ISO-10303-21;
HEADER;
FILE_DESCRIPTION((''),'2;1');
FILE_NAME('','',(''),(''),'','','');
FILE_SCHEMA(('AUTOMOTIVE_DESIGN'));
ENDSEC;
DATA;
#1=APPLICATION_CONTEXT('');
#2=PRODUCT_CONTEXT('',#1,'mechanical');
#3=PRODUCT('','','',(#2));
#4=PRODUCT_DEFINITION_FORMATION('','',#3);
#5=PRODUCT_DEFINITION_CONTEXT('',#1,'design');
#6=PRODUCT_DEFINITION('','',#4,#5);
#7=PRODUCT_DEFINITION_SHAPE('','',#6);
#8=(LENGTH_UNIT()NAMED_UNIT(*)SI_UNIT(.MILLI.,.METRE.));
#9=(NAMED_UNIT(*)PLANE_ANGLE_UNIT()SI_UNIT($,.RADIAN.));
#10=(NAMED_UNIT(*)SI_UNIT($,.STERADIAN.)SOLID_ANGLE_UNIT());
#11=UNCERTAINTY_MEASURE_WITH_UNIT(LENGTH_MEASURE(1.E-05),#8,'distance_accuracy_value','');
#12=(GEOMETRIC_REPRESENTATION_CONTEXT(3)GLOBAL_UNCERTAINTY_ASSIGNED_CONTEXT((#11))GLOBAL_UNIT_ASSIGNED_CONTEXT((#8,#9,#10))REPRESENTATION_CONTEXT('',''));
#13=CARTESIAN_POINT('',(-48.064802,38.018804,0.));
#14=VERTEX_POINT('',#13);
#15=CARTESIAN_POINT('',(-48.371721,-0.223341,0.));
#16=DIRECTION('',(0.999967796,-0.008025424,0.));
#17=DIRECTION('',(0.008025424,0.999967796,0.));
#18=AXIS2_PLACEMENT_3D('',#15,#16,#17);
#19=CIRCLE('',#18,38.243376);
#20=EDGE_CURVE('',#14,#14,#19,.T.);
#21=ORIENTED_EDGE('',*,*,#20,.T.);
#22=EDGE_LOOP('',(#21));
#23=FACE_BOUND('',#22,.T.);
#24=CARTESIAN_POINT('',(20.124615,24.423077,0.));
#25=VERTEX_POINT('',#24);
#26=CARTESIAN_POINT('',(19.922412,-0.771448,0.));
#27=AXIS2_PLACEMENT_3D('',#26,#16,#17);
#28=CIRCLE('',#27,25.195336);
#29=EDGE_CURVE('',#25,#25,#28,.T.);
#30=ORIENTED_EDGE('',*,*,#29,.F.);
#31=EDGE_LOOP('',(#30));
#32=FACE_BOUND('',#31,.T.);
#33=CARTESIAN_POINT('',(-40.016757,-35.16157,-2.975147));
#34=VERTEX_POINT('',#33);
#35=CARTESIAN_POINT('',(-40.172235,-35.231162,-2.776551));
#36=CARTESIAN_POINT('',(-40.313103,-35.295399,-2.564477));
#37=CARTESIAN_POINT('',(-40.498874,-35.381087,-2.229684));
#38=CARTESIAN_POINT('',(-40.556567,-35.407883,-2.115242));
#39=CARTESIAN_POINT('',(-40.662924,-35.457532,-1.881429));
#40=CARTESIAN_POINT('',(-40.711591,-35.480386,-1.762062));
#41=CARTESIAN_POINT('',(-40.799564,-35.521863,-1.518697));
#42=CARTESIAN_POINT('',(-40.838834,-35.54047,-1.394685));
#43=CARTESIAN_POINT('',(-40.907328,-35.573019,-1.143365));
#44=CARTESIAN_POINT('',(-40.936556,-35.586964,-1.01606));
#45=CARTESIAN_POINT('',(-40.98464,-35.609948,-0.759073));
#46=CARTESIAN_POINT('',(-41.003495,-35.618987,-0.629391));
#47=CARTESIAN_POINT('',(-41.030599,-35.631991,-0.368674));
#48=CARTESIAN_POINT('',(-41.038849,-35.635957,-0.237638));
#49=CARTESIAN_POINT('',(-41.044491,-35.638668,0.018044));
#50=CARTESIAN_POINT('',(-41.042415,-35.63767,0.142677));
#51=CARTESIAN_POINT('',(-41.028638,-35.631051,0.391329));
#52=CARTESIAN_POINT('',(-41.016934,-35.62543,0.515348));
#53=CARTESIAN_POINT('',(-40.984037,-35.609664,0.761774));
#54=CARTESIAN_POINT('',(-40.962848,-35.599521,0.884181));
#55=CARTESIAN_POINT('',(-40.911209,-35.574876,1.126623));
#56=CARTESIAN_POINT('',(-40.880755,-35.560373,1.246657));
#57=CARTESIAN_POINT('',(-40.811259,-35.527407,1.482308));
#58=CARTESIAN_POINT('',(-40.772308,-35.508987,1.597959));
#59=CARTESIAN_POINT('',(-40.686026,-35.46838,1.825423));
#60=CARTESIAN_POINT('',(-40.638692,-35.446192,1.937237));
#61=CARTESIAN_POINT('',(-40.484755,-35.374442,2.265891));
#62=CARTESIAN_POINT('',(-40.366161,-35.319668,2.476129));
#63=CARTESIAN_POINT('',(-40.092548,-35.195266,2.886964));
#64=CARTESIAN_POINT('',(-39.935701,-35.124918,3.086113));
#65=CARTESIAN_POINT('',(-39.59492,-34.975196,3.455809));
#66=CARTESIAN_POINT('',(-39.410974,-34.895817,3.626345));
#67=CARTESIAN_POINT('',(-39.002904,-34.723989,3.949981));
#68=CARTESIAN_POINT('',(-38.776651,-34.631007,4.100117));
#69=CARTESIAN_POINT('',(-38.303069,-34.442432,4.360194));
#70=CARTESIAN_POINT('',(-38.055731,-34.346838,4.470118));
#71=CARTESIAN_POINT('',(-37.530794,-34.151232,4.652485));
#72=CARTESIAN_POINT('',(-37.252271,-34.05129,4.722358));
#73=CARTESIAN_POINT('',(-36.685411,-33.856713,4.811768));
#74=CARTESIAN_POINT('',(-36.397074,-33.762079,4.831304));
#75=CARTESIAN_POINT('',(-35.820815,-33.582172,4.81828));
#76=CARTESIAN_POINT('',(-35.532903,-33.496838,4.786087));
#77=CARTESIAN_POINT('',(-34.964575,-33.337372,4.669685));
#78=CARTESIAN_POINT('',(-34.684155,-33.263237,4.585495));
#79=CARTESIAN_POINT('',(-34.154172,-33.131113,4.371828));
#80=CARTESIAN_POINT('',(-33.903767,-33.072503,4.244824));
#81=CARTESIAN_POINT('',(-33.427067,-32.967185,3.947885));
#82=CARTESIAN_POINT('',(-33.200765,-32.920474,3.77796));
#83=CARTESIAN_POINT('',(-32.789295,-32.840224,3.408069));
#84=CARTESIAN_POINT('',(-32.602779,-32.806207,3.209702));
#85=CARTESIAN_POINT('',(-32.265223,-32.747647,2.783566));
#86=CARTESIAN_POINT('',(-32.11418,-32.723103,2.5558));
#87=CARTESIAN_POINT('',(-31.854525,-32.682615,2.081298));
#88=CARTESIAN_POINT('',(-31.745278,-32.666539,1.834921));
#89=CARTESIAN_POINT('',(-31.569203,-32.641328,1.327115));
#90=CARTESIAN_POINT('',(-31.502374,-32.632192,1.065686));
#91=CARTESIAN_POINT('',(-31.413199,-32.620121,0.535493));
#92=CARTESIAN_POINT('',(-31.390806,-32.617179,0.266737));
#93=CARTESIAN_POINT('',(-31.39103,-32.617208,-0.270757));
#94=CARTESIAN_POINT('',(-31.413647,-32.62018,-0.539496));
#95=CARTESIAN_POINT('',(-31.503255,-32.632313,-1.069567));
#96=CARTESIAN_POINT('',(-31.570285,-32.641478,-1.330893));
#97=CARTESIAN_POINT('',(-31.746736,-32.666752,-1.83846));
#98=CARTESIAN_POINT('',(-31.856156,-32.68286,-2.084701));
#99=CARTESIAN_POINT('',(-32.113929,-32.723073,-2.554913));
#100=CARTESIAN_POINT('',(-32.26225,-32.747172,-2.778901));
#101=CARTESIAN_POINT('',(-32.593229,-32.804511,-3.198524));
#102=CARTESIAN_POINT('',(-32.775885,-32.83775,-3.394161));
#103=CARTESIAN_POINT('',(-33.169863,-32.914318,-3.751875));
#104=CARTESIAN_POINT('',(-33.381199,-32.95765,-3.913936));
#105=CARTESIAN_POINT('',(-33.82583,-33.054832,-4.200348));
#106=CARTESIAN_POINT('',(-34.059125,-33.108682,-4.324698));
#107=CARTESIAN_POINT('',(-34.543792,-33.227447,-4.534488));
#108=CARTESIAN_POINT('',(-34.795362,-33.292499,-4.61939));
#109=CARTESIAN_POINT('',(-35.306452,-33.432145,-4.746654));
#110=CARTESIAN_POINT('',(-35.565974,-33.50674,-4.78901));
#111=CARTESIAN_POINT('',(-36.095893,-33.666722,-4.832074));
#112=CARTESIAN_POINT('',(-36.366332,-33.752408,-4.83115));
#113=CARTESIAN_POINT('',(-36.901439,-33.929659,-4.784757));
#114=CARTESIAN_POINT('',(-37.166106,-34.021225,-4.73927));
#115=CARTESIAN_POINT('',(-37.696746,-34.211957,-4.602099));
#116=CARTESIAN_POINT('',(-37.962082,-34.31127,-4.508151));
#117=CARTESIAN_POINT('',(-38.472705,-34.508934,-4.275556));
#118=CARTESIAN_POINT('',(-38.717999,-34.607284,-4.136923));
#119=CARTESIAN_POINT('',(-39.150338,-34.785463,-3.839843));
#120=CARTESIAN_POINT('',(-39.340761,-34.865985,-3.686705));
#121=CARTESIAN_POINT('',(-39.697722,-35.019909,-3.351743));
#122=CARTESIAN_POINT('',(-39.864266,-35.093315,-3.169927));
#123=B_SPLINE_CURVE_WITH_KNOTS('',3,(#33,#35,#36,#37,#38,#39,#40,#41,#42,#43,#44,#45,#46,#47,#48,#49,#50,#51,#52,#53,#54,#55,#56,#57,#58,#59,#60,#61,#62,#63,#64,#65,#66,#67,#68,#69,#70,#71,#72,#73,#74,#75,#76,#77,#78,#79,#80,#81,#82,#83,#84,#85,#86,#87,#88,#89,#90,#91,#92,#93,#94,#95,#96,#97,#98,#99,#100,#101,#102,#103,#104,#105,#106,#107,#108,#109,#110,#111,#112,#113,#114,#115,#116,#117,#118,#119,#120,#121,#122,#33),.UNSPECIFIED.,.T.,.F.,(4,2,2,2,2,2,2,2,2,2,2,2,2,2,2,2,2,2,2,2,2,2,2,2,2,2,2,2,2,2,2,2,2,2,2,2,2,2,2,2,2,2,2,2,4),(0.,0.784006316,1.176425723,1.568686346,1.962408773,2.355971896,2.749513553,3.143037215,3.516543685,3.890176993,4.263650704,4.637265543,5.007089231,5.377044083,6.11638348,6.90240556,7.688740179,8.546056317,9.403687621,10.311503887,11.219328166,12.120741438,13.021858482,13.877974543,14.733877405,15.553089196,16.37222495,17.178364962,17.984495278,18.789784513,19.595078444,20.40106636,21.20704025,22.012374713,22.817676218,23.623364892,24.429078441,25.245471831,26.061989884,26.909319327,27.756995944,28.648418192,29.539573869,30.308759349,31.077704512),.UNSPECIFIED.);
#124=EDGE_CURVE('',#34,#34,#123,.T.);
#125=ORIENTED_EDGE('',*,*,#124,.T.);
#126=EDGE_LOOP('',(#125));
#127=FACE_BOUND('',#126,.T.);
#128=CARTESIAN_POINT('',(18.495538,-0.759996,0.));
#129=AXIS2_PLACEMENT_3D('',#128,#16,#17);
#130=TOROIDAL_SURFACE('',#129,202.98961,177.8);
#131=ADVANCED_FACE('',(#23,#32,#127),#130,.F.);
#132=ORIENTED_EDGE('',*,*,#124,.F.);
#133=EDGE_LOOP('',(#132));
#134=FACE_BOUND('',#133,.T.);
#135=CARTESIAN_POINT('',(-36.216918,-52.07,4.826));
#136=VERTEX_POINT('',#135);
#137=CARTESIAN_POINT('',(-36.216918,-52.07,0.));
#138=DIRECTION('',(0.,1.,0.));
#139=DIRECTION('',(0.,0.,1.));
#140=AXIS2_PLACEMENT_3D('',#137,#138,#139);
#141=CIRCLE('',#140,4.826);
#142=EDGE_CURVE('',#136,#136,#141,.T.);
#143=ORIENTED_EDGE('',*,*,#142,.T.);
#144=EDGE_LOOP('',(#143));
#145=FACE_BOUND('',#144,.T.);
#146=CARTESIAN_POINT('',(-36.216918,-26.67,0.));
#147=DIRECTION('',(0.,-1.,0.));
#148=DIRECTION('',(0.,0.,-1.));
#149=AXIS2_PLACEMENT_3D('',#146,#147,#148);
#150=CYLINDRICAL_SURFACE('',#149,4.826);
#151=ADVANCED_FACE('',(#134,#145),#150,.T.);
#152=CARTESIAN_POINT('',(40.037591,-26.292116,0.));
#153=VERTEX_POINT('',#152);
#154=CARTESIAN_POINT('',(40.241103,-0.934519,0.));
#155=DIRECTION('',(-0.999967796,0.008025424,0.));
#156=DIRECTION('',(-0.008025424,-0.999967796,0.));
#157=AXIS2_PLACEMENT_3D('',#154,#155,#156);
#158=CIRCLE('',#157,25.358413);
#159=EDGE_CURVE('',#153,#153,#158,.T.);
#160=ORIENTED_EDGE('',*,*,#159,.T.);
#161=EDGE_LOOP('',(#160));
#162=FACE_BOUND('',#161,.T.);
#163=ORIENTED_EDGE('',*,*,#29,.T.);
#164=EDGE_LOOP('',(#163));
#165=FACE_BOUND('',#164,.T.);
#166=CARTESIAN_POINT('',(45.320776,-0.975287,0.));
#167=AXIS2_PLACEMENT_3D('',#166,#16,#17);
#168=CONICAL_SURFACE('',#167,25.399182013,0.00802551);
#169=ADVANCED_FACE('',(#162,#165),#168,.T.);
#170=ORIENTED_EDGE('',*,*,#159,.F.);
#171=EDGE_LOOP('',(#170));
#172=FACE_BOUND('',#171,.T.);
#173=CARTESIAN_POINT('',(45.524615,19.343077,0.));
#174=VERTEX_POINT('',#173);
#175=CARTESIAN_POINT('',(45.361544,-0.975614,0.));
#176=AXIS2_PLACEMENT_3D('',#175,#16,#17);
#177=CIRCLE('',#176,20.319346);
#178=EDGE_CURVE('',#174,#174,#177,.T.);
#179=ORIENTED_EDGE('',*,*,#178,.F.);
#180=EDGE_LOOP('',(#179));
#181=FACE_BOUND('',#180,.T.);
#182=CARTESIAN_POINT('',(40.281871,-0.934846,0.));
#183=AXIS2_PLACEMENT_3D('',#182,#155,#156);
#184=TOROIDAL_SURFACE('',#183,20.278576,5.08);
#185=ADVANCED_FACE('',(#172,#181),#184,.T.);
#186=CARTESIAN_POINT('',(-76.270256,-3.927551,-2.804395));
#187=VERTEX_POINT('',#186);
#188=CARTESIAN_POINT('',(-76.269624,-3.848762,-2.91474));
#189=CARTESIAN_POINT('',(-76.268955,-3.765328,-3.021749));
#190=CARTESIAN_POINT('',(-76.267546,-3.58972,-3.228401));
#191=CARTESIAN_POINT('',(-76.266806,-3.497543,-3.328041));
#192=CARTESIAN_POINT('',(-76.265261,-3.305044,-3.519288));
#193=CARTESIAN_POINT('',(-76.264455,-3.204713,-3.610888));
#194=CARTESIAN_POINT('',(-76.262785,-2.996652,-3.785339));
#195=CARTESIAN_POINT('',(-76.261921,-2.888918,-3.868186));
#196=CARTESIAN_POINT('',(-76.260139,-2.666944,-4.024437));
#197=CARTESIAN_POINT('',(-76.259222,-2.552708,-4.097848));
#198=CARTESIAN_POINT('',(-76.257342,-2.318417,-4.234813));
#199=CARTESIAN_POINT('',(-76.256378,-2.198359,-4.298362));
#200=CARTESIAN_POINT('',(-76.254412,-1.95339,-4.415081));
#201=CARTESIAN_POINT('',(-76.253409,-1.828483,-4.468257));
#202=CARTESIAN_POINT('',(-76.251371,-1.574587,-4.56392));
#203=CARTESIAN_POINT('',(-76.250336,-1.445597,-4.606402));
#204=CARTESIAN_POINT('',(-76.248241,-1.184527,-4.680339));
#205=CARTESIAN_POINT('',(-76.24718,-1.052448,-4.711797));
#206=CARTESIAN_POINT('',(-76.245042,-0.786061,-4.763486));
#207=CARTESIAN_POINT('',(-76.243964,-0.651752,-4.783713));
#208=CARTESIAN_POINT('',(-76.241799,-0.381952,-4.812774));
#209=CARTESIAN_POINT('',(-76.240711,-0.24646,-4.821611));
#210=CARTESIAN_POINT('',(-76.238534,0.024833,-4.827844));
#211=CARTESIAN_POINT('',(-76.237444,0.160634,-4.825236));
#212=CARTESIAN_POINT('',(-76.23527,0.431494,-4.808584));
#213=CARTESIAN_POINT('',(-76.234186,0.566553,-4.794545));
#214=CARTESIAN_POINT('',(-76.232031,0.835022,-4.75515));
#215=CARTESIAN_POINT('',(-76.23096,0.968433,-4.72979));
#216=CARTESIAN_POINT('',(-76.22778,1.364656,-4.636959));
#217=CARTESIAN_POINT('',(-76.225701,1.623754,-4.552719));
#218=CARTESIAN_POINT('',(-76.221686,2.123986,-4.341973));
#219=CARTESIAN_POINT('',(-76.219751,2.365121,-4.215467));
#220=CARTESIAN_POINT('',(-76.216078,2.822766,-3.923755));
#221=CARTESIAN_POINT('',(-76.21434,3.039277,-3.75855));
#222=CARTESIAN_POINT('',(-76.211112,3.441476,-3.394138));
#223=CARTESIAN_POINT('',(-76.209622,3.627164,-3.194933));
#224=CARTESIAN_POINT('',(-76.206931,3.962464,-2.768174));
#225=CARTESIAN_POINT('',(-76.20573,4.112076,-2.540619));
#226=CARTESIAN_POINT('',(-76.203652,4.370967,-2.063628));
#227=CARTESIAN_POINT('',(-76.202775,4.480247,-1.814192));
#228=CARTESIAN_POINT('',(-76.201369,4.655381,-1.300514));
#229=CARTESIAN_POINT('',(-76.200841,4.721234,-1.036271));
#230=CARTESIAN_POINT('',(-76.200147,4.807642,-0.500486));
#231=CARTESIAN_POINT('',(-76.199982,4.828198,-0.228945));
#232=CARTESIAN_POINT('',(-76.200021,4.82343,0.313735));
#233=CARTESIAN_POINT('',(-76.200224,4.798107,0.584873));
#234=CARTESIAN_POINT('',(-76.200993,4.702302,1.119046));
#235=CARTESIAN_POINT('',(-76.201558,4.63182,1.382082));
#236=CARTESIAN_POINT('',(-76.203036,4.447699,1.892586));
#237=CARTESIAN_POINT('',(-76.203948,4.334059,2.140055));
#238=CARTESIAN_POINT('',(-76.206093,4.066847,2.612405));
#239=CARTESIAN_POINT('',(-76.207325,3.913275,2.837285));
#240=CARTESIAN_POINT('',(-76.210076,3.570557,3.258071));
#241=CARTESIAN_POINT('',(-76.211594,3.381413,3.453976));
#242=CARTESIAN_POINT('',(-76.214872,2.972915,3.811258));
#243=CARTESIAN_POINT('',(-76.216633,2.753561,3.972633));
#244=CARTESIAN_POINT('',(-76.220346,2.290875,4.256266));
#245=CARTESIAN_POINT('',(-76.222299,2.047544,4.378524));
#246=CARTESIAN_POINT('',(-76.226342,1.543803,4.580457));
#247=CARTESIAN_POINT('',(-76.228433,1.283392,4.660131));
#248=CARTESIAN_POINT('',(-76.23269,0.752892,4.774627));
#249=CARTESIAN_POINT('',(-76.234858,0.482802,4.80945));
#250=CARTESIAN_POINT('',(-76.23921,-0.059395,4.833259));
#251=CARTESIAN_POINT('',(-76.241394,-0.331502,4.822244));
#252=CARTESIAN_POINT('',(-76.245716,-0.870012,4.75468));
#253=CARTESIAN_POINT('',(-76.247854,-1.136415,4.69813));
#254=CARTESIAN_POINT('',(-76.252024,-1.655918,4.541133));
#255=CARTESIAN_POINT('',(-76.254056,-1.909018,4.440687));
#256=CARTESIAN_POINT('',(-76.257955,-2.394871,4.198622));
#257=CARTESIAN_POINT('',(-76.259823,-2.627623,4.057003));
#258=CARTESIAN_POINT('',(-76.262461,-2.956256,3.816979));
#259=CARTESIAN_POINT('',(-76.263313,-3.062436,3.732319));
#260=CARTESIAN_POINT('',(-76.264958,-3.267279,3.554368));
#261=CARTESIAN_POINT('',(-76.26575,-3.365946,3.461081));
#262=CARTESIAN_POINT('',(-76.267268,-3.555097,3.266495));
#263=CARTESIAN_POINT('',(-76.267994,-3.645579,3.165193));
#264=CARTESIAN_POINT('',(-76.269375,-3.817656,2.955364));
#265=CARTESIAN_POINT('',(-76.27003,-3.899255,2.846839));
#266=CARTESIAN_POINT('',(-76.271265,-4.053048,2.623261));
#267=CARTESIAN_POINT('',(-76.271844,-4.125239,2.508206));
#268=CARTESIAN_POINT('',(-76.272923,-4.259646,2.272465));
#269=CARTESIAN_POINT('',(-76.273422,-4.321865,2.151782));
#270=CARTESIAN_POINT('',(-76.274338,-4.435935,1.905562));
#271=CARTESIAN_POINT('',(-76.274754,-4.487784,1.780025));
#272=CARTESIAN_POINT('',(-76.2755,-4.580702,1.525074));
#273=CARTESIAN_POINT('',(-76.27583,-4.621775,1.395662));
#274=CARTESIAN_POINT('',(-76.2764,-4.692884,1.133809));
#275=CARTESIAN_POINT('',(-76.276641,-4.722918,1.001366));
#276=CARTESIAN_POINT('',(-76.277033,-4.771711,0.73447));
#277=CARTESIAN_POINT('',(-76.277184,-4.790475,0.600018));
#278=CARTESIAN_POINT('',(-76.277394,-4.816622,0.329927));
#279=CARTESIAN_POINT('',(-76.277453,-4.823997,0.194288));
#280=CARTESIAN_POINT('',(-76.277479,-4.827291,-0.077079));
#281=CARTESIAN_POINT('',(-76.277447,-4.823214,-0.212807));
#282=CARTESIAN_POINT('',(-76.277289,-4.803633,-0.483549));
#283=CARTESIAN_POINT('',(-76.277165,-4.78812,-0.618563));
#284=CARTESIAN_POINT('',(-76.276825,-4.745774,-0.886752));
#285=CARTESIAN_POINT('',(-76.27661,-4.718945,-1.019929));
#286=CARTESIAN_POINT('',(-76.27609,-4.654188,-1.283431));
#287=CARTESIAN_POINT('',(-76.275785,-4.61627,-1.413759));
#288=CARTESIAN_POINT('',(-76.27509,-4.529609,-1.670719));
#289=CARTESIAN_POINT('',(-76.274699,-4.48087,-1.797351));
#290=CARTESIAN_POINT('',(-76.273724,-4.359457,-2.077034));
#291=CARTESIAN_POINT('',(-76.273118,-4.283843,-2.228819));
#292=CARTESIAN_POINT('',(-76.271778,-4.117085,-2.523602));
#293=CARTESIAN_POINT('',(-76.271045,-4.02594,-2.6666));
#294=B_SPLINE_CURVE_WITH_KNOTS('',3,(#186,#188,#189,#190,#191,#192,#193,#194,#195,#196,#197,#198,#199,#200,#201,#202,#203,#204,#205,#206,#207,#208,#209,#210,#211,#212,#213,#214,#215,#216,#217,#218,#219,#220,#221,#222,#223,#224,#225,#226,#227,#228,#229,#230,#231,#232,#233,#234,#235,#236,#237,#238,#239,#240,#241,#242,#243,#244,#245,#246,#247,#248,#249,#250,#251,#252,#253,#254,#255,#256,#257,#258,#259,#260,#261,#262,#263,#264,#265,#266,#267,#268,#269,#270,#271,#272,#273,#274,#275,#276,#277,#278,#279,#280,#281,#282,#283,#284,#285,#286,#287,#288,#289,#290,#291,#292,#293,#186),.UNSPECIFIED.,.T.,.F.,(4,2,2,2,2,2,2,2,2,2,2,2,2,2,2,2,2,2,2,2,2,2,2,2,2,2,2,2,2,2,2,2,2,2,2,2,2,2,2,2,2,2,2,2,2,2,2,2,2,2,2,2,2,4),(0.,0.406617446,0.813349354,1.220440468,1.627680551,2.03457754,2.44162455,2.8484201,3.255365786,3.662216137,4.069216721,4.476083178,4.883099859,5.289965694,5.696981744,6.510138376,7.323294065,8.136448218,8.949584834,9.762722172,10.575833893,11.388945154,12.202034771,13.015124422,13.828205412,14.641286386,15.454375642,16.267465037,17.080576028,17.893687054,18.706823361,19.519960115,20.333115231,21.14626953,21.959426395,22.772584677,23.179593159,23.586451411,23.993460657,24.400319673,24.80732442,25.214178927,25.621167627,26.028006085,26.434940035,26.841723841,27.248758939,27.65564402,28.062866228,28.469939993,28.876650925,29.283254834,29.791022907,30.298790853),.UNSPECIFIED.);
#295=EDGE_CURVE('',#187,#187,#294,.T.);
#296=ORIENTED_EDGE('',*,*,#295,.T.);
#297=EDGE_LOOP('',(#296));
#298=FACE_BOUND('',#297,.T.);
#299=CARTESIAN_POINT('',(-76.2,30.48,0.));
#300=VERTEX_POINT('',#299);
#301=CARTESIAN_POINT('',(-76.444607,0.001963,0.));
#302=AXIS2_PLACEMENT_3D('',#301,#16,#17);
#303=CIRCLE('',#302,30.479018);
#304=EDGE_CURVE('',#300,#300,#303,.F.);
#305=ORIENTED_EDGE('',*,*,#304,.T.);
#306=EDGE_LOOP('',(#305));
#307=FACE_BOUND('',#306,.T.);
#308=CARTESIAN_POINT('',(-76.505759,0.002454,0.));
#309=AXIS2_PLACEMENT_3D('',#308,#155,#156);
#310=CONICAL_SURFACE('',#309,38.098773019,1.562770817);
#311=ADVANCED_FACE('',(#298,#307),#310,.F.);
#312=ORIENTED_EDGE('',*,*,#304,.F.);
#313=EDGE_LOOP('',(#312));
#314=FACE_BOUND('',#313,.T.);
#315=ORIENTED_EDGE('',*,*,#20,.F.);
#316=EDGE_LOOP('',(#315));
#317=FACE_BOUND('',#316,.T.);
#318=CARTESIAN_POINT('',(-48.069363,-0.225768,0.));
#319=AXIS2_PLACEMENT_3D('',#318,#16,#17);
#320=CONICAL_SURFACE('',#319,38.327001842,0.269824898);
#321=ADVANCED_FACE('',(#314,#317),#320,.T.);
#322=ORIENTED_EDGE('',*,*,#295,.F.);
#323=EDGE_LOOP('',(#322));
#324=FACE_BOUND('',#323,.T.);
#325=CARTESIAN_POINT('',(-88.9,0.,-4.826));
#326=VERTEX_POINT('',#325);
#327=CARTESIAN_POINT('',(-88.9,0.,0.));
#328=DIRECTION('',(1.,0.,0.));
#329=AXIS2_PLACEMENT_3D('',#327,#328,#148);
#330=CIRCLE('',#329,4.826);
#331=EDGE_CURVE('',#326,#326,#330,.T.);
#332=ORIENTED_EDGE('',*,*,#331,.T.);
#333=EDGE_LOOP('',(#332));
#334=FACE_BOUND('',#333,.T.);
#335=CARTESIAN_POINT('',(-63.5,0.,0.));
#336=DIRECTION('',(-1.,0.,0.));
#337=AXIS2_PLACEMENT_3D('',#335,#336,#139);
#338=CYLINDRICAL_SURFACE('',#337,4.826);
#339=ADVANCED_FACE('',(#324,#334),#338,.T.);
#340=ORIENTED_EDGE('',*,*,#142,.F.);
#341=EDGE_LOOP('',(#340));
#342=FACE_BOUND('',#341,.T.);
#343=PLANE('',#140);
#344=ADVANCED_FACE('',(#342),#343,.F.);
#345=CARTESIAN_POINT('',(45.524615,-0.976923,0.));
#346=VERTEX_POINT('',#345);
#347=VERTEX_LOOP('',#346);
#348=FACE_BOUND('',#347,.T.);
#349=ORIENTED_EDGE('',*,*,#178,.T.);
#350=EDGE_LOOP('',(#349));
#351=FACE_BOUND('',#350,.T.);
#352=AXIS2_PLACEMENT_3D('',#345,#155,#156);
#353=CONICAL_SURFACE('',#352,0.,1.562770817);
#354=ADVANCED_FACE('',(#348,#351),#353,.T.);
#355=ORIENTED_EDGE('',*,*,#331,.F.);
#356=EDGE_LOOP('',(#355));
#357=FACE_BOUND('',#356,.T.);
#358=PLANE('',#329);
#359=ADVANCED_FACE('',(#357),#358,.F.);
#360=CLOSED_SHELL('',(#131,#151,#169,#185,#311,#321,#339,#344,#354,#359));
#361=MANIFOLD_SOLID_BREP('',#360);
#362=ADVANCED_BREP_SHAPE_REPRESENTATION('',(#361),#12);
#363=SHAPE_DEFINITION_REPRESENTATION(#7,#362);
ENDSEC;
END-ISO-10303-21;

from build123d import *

# Parameters (mm, degrees)
FILLET2_R           = 5.08
SKETCH3_R           = 4.826
BOSS_EXTRUDE1_DEPTH = 12.7
SKETCH5_R           = 4.826
BOSS_EXTRUDE2_DEPTH = 12.7


with BuildPart() as part:
    # Sketch1 → Revolve2 (revolve)
    with BuildSketch(Plane.XY):
        with BuildLine():
            Line((45.524615385, -0.976923077), (45.524615385, 24.423076923))
            Line((45.524615385, 24.423076923), (20.124615385, 24.423076923))
            ThreePointArc((20.124615385, 24.423076923), (-14.744833443, 27.875832785), (-48.26, 38.1))
            Line((-48.26, 38.1), (-50.8, 38.1))
            Line((-50.8, 38.1), (-76.2, 38.1))
            Line((-76.2, 38.1), (-76.2, 0))
            Line((-76.2, 0), (45.524615385, -0.976923077))
        make_face()
    revolve(axis=Axis((45.524615385, -0.976923077, 0), (-0.9999677957684845, 0.008025423722058495, 0)))

    # Fillet2
    fillet2_edges = [part.edges().sort_by_distance(p)[0] for p in [
        (45.116936989, -26.37365118, 0),
    ]]
    fillet(fillet2_edges, radius=FILLET2_R)

    # Chamfer1: read off the stored shape, not the designer's step
    # Chamfer1 outline → Chamfer1 (revolve, cut)
    with BuildSketch(Plane(origin=(-0.004907846, -0.611517594, 0), x_dir=(0.008025423722058226, 0.9999677957684845, 0), z_dir=(0, 0, -1))):
        Polygon((30.479018415, -76.442160953), (30.479018415, -76.503314681), (38.098773019, -76.503314681), (38.323003358, -48.564214468), (38.323003358, -48.368371001), (38.243376135, -48.368371001), align=None)
    revolve(axis=Axis((-0.004907846, -0.611517594, 0), (0.9999677957684845, -0.008025423722058226, 0)), mode=Mode.SUBTRACT)

    # Sketch3 → Boss-Extrude1 (add, symmetric)
    with BuildSketch(Plane(origin=(-76.2, 0, 0), x_dir=(0, 0, -1), z_dir=(1, 0, 0))):
        with Locations(Location((0, 0, 0), (0, 0, 305.528030249))):
            Circle(SKETCH3_R)
    extrude(amount=BOSS_EXTRUDE1_DEPTH, both=True)

    # Sketch5 → Boss-Extrude2 (add, symmetric)
    with BuildSketch(Plane(origin=(0, -39.37, 0), x_dir=(1, 0, 0), z_dir=(0, 1, 0))):
        with Locations(Location((-36.216917905, 0, 0), (0, 0, 141.940248705))):
            Circle(SKETCH5_R)
    extrude(amount=BOSS_EXTRUDE2_DEPTH, both=True)


solid = part.part
